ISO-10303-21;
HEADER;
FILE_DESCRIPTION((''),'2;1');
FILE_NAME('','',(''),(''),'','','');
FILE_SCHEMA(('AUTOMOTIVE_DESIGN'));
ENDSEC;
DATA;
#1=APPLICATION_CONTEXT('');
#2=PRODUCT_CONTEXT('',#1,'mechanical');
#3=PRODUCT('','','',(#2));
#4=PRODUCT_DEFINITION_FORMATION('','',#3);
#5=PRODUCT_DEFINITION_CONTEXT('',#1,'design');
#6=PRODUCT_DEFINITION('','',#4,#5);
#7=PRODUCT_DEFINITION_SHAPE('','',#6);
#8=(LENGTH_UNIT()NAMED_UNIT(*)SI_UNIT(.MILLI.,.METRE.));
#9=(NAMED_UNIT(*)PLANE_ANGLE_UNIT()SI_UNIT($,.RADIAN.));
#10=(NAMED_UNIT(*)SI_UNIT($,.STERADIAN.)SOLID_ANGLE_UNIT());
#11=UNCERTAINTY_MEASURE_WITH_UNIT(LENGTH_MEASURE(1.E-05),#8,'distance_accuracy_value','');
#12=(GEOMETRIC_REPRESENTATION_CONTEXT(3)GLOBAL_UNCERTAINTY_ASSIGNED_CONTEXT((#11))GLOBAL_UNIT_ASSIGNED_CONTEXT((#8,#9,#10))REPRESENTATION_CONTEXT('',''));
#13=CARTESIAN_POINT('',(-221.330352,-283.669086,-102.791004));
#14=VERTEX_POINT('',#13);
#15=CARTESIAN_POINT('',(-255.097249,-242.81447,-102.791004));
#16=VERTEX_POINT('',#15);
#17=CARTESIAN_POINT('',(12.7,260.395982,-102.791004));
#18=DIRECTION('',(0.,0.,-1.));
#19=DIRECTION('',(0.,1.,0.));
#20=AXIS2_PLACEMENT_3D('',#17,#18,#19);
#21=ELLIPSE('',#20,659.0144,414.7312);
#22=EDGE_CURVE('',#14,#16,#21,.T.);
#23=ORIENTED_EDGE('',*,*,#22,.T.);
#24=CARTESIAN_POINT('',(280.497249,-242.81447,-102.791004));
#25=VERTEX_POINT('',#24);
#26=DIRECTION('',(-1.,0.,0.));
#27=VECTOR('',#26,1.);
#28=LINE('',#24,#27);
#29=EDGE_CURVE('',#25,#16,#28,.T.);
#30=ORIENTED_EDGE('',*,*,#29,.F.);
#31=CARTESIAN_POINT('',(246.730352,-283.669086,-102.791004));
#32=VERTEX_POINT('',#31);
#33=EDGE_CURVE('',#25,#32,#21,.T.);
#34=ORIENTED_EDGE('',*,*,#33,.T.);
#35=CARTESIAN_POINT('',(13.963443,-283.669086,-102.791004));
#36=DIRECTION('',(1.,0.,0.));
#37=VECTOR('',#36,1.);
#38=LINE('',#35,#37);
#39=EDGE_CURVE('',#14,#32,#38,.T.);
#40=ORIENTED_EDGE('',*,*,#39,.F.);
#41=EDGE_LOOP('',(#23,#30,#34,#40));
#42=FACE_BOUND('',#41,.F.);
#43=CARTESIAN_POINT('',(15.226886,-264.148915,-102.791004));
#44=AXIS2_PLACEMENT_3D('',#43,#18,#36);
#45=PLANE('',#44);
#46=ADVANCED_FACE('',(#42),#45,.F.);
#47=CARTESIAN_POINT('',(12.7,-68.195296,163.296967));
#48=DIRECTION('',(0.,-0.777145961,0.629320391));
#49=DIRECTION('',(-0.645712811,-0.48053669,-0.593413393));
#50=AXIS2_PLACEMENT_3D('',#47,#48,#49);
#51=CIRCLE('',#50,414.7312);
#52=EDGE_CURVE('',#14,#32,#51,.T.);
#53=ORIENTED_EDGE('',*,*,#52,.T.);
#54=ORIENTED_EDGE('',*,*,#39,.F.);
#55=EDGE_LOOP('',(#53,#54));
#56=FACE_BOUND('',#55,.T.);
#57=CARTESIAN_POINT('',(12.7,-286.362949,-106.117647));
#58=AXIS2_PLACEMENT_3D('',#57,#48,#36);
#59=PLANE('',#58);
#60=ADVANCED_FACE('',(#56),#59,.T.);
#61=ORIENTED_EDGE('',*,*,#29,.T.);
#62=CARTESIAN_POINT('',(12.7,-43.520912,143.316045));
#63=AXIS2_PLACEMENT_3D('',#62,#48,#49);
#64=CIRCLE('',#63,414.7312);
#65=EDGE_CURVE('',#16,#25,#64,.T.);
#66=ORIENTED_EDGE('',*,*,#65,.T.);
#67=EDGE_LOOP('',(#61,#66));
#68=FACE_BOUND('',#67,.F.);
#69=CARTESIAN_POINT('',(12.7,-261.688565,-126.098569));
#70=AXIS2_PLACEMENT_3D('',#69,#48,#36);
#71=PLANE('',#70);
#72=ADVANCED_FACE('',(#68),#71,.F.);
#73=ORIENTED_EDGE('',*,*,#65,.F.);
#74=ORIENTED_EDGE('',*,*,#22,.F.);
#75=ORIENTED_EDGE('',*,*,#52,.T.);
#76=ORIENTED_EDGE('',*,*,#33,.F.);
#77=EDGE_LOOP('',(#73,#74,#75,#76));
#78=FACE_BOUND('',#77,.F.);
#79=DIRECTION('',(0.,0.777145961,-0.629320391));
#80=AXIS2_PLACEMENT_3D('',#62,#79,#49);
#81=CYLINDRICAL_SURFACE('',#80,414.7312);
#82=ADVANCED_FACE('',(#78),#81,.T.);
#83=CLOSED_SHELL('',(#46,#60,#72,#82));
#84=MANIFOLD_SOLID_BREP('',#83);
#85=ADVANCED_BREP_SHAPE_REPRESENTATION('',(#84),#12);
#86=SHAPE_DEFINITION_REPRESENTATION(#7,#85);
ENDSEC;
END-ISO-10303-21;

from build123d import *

# Parameters (mm, degrees)
F1_DEPTH = 25.4
F3_DEPTH = 31.75
F5_DEPTH = 25.4
F6_W     = 25.4
F6_H     = 270.2104524793
F7_DEPTH = 508


with BuildPart() as f1:
    # F0 (on Right) → F1 (new body)
    with BuildSketch(Plane.YZ):
        Polygon((27.3959822953, -102.7910036798), (27.3959822953, 85.8886760547), (-43.5209119504, 143.3160446986), (-242.814470184, -102.7910036798), align=None)
    extrude(amount=F1_DEPTH)

    # F6 (on face) → F7 (cut)
    with BuildSketch(Plane(origin=(0, 0, -102.7910036798), x_dir=(1, 0, 0), z_dir=(0, 0, -1))):
        with Locations((12.7, 107.7092439444)):
            Rectangle(F6_W, F6_H)
    extrude(amount=-F7_DEPTH, mode=Mode.SUBTRACT)


with BuildPart() as f3:
    # F2 (on face) → F3 (new body)
    with BuildSketch(Plane(origin=(0, -96.3768318043, 78.044419565), x_dir=(1, 0, 0), z_dir=(0, -0.7771459615, 0.629320391))):
        with BuildLine():
            Line((0, -232.6917107126), (-255.0972491243, -232.6917107126))
            ThreePointArc((-255.0972491243, -232.6917107126), (12.7, -330.742311978), (280.4972491243, -232.6917107126))
            Line((280.4972491243, -232.6917107126), (25.4, -232.6917107126))
            Line((25.4, -232.6917107126), (12.7, -232.6917107126))
            Line((12.7, -232.6917107126), (0, -232.6917107126))
        make_face()
    extrude(amount=F3_DEPTH)

    # F4 (on face) → F5 (cut)
    with BuildSketch(Plane(origin=(0, 0, -102.7910036798), x_dir=(1, 0, 0), z_dir=(0, 0, -1))):
        Polygon((0, 242.814470184), (12.7, 242.814470184), (25.4, 242.814470184), (293.8941717148, 242.814470184), (293.8941717148, 285.4833602905), (-263.440400362, 285.4833602905), (-263.440400362, 242.814470184), align=None)
    extrude(amount=-F5_DEPTH, mode=Mode.SUBTRACT)


solid = f3.part
